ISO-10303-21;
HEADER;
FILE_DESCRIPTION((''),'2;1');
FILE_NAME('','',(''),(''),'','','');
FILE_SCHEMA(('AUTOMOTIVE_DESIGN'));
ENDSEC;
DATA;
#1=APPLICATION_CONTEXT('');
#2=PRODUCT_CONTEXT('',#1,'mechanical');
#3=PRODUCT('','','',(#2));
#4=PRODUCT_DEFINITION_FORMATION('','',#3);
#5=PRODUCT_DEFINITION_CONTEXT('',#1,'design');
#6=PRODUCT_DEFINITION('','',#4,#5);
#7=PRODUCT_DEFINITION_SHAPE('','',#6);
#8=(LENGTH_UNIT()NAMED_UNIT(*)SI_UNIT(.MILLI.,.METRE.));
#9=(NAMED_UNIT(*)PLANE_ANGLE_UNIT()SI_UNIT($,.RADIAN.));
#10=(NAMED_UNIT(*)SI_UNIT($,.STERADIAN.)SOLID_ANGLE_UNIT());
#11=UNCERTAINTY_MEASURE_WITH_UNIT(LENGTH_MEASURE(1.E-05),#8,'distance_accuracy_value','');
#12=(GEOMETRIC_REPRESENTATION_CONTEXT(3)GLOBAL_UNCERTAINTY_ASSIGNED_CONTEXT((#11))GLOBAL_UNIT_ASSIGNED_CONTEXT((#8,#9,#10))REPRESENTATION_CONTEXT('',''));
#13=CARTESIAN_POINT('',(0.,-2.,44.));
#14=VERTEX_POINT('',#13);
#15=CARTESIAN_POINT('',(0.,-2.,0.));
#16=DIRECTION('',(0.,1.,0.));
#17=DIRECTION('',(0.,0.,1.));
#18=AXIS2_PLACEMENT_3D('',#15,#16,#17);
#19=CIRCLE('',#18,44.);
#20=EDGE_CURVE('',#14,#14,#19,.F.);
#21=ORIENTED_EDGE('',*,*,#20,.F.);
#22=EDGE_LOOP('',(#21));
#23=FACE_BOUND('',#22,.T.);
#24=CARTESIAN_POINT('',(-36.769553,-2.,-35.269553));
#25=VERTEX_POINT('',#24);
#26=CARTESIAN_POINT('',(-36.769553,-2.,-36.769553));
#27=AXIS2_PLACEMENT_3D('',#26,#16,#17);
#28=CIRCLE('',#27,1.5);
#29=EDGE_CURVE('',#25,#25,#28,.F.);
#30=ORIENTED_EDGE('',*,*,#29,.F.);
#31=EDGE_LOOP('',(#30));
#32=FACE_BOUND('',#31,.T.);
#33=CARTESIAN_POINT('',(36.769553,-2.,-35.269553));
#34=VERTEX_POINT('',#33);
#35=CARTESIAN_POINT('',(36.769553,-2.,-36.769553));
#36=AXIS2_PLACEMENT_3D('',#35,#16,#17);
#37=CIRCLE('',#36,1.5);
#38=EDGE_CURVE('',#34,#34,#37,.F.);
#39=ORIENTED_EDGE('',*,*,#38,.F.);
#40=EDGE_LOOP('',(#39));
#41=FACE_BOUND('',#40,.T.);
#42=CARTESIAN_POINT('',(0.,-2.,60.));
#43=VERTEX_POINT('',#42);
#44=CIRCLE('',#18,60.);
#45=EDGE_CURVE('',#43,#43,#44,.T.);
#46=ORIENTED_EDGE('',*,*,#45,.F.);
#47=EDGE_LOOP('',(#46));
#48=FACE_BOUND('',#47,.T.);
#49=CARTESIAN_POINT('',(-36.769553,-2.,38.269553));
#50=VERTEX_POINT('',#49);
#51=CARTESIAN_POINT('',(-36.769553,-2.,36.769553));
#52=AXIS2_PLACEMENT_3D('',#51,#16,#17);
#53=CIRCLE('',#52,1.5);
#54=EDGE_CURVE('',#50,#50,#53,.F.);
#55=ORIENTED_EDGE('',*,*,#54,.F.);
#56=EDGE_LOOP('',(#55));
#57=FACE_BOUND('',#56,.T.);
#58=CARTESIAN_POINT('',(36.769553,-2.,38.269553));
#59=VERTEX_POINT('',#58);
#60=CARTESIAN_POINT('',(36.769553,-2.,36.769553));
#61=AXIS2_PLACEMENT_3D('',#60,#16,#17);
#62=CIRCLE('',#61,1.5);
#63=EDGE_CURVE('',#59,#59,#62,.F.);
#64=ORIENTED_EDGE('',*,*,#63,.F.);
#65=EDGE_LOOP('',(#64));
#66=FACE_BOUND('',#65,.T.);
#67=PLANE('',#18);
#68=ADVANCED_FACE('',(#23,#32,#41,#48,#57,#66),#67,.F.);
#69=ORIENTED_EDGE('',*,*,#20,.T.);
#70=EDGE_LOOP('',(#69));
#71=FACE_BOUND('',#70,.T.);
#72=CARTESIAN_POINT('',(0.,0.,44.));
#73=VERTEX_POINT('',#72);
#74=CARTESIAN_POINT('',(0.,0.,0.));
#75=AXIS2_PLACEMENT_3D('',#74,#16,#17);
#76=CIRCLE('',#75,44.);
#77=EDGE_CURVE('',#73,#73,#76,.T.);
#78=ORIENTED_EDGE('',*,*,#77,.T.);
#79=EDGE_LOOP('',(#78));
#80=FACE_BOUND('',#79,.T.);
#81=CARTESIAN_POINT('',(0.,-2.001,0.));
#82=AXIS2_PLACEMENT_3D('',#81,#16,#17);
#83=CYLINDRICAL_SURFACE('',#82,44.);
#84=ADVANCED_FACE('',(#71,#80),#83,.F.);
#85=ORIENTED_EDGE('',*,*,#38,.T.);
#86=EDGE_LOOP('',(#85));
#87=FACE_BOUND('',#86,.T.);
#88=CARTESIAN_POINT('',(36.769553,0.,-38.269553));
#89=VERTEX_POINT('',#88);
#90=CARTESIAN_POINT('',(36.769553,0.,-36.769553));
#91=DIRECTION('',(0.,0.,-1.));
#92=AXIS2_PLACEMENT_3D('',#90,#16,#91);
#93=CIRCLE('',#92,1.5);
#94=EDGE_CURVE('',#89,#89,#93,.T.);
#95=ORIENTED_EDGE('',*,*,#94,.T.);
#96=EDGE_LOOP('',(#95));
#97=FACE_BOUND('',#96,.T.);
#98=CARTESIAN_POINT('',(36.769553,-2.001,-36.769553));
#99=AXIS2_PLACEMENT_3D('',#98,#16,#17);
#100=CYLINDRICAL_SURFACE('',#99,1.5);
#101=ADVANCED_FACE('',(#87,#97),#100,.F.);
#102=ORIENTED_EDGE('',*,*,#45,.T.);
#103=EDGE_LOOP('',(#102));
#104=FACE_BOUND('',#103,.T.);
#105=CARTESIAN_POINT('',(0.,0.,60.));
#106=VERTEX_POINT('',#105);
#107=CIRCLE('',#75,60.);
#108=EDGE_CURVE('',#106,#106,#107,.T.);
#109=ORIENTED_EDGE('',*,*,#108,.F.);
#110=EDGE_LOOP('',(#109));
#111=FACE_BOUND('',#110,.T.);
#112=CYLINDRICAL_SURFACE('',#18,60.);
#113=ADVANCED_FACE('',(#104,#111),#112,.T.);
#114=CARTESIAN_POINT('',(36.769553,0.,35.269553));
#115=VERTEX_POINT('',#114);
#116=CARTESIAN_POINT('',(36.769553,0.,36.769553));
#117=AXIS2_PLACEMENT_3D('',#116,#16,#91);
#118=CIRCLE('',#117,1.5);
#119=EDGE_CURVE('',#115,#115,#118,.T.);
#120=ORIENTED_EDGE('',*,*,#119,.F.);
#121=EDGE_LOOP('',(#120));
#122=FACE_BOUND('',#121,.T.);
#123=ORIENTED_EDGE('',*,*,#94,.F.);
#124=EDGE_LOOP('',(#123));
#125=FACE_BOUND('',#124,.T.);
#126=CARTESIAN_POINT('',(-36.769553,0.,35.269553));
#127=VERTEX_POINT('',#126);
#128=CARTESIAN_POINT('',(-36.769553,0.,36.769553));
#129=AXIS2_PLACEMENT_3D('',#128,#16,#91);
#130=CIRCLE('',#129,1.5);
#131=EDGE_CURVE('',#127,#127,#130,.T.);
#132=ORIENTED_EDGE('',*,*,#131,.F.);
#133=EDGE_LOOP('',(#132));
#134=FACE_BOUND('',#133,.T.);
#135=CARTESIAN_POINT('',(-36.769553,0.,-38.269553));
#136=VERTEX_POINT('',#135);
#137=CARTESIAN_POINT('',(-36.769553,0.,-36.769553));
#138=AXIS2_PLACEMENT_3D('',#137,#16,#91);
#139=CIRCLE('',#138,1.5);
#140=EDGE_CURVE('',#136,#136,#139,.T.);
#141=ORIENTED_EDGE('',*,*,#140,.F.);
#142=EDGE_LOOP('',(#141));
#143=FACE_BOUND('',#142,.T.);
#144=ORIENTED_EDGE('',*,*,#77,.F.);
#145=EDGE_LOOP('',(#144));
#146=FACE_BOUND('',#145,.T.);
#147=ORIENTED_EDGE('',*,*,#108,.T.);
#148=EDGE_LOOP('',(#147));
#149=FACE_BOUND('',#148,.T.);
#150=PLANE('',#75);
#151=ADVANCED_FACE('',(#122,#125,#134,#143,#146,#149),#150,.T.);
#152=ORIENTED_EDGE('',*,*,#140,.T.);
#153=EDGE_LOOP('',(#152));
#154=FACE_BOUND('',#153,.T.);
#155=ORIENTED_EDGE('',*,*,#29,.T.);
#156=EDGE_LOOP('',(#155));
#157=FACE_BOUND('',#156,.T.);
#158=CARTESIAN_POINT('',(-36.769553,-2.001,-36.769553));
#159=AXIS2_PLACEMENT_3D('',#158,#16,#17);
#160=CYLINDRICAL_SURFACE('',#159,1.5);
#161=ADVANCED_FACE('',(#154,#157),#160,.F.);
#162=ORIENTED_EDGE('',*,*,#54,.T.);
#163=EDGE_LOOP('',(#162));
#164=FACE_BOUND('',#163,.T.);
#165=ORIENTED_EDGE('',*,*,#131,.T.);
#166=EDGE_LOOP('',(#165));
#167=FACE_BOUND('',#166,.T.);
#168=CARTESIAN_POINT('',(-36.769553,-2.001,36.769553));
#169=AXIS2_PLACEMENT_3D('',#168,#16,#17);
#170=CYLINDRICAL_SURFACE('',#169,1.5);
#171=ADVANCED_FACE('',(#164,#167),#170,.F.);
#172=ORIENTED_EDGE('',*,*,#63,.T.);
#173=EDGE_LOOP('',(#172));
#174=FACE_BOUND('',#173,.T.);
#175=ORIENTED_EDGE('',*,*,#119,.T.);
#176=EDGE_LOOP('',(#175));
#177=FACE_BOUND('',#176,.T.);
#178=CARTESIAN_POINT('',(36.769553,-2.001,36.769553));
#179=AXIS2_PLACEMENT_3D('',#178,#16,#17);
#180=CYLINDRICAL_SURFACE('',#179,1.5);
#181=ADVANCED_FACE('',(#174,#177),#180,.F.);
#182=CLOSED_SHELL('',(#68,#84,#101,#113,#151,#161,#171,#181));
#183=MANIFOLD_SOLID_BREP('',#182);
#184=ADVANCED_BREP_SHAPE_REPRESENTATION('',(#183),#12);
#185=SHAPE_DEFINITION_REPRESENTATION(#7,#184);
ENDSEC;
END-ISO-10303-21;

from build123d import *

# Parameters (mm, degrees)
SKETCH_1_R             = 60
SM_BASE_FLANGE_1_DEPTH = 2
CUT_EXTRUDE_2_REACH    = 86.876
SKETCH_7_R             = 44
CUT_EXTRUDE_1_REACH    = 86.876
SKETCH_6_R             = 1.5


# Sheet-metal steps are written as plain solids
with BuildPart() as part:
    # Sketch 1 → 基体-法兰1 (new body)
    with BuildSketch(Plane(origin=(0, 0, 0), x_dir=(1, 0, 0), z_dir=(0, 1, 0))):
        with Locations(Location((0, 0, 0), (0, 0, 270))):
            Circle(SKETCH_1_R)
    extrude(amount=-SM_BASE_FLANGE_1_DEPTH)

    # 草图7 → 切除-拉伸2 (cut, up to next)
    with BuildSketch(Plane(origin=(0, 0, 0), x_dir=(1, 0, 0), z_dir=(0, 1, 0)), mode=Mode.PRIVATE) as cut_extrude_2_sk1:
        with Locations(Location((0, 0, 0), (0, 0, 270))):
            Circle(SKETCH_7_R)
    cut_extrude_2_tool1 = extrude(cut_extrude_2_sk1.sketch, amount=-CUT_EXTRUDE_2_REACH, mode=Mode.PRIVATE) & part.part
    add(cut_extrude_2_tool1.solids().sort_by_distance((0, 0, 0))[0], mode=Mode.SUBTRACT)

    # 草图6 → 切除-拉伸1 (cut, up to next)
    with BuildSketch(Plane(origin=(0, 0, 0), x_dir=(1, 0, 0), z_dir=(0, 1, 0)), mode=Mode.PRIVATE) as cut_extrude_1_sk1:
        with Locations(Location((-36.769552622, -36.769552622, 0), (0, 0, 270))):
            Circle(SKETCH_6_R)
    cut_extrude_1_tool1 = extrude(cut_extrude_1_sk1.sketch, amount=-CUT_EXTRUDE_1_REACH, mode=Mode.PRIVATE) & part.part
    # 草图6 → 切除-拉伸1 (cut, up to next)
    with BuildSketch(Plane(origin=(0, 0, 0), x_dir=(1, 0, 0), z_dir=(0, 1, 0)), mode=Mode.PRIVATE) as cut_extrude_1_sk2:
        with Locations(Location((-36.769552622, 36.769552622, 0), (0, 0, 270))):
            Circle(SKETCH_6_R)
    cut_extrude_1_tool2 = extrude(cut_extrude_1_sk2.sketch, amount=-CUT_EXTRUDE_1_REACH, mode=Mode.PRIVATE) & part.part
    # 草图6 → 切除-拉伸1 (cut, up to next)
    with BuildSketch(Plane(origin=(0, 0, 0), x_dir=(1, 0, 0), z_dir=(0, 1, 0)), mode=Mode.PRIVATE) as cut_extrude_1_sk3:
        with Locations(Location((36.769552622, 36.769552622, 0), (0, 0, 270))):
            Circle(SKETCH_6_R)
    cut_extrude_1_tool3 = extrude(cut_extrude_1_sk3.sketch, amount=-CUT_EXTRUDE_1_REACH, mode=Mode.PRIVATE) & part.part
    # 草图6 → 切除-拉伸1 (cut, up to next)
    with BuildSketch(Plane(origin=(0, 0, 0), x_dir=(1, 0, 0), z_dir=(0, 1, 0)), mode=Mode.PRIVATE) as cut_extrude_1_sk4:
        with Locations(Location((36.769552622, -36.769552622, 0), (0, 0, 270))):
            Circle(SKETCH_6_R)
    cut_extrude_1_tool4 = extrude(cut_extrude_1_sk4.sketch, amount=-CUT_EXTRUDE_1_REACH, mode=Mode.PRIVATE) & part.part
    add(cut_extrude_1_tool1.solids().sort_by_distance((-36.769553, 0, 36.769553))[0], mode=Mode.SUBTRACT)
    add(cut_extrude_1_tool2.solids().sort_by_distance((-36.769553, 0, -36.769553))[0], mode=Mode.SUBTRACT)
    add(cut_extrude_1_tool3.solids().sort_by_distance((36.769553, 0, -36.769553))[0], mode=Mode.SUBTRACT)
    add(cut_extrude_1_tool4.solids().sort_by_distance((36.769553, 0, 36.769553))[0], mode=Mode.SUBTRACT)


solid = part.part
